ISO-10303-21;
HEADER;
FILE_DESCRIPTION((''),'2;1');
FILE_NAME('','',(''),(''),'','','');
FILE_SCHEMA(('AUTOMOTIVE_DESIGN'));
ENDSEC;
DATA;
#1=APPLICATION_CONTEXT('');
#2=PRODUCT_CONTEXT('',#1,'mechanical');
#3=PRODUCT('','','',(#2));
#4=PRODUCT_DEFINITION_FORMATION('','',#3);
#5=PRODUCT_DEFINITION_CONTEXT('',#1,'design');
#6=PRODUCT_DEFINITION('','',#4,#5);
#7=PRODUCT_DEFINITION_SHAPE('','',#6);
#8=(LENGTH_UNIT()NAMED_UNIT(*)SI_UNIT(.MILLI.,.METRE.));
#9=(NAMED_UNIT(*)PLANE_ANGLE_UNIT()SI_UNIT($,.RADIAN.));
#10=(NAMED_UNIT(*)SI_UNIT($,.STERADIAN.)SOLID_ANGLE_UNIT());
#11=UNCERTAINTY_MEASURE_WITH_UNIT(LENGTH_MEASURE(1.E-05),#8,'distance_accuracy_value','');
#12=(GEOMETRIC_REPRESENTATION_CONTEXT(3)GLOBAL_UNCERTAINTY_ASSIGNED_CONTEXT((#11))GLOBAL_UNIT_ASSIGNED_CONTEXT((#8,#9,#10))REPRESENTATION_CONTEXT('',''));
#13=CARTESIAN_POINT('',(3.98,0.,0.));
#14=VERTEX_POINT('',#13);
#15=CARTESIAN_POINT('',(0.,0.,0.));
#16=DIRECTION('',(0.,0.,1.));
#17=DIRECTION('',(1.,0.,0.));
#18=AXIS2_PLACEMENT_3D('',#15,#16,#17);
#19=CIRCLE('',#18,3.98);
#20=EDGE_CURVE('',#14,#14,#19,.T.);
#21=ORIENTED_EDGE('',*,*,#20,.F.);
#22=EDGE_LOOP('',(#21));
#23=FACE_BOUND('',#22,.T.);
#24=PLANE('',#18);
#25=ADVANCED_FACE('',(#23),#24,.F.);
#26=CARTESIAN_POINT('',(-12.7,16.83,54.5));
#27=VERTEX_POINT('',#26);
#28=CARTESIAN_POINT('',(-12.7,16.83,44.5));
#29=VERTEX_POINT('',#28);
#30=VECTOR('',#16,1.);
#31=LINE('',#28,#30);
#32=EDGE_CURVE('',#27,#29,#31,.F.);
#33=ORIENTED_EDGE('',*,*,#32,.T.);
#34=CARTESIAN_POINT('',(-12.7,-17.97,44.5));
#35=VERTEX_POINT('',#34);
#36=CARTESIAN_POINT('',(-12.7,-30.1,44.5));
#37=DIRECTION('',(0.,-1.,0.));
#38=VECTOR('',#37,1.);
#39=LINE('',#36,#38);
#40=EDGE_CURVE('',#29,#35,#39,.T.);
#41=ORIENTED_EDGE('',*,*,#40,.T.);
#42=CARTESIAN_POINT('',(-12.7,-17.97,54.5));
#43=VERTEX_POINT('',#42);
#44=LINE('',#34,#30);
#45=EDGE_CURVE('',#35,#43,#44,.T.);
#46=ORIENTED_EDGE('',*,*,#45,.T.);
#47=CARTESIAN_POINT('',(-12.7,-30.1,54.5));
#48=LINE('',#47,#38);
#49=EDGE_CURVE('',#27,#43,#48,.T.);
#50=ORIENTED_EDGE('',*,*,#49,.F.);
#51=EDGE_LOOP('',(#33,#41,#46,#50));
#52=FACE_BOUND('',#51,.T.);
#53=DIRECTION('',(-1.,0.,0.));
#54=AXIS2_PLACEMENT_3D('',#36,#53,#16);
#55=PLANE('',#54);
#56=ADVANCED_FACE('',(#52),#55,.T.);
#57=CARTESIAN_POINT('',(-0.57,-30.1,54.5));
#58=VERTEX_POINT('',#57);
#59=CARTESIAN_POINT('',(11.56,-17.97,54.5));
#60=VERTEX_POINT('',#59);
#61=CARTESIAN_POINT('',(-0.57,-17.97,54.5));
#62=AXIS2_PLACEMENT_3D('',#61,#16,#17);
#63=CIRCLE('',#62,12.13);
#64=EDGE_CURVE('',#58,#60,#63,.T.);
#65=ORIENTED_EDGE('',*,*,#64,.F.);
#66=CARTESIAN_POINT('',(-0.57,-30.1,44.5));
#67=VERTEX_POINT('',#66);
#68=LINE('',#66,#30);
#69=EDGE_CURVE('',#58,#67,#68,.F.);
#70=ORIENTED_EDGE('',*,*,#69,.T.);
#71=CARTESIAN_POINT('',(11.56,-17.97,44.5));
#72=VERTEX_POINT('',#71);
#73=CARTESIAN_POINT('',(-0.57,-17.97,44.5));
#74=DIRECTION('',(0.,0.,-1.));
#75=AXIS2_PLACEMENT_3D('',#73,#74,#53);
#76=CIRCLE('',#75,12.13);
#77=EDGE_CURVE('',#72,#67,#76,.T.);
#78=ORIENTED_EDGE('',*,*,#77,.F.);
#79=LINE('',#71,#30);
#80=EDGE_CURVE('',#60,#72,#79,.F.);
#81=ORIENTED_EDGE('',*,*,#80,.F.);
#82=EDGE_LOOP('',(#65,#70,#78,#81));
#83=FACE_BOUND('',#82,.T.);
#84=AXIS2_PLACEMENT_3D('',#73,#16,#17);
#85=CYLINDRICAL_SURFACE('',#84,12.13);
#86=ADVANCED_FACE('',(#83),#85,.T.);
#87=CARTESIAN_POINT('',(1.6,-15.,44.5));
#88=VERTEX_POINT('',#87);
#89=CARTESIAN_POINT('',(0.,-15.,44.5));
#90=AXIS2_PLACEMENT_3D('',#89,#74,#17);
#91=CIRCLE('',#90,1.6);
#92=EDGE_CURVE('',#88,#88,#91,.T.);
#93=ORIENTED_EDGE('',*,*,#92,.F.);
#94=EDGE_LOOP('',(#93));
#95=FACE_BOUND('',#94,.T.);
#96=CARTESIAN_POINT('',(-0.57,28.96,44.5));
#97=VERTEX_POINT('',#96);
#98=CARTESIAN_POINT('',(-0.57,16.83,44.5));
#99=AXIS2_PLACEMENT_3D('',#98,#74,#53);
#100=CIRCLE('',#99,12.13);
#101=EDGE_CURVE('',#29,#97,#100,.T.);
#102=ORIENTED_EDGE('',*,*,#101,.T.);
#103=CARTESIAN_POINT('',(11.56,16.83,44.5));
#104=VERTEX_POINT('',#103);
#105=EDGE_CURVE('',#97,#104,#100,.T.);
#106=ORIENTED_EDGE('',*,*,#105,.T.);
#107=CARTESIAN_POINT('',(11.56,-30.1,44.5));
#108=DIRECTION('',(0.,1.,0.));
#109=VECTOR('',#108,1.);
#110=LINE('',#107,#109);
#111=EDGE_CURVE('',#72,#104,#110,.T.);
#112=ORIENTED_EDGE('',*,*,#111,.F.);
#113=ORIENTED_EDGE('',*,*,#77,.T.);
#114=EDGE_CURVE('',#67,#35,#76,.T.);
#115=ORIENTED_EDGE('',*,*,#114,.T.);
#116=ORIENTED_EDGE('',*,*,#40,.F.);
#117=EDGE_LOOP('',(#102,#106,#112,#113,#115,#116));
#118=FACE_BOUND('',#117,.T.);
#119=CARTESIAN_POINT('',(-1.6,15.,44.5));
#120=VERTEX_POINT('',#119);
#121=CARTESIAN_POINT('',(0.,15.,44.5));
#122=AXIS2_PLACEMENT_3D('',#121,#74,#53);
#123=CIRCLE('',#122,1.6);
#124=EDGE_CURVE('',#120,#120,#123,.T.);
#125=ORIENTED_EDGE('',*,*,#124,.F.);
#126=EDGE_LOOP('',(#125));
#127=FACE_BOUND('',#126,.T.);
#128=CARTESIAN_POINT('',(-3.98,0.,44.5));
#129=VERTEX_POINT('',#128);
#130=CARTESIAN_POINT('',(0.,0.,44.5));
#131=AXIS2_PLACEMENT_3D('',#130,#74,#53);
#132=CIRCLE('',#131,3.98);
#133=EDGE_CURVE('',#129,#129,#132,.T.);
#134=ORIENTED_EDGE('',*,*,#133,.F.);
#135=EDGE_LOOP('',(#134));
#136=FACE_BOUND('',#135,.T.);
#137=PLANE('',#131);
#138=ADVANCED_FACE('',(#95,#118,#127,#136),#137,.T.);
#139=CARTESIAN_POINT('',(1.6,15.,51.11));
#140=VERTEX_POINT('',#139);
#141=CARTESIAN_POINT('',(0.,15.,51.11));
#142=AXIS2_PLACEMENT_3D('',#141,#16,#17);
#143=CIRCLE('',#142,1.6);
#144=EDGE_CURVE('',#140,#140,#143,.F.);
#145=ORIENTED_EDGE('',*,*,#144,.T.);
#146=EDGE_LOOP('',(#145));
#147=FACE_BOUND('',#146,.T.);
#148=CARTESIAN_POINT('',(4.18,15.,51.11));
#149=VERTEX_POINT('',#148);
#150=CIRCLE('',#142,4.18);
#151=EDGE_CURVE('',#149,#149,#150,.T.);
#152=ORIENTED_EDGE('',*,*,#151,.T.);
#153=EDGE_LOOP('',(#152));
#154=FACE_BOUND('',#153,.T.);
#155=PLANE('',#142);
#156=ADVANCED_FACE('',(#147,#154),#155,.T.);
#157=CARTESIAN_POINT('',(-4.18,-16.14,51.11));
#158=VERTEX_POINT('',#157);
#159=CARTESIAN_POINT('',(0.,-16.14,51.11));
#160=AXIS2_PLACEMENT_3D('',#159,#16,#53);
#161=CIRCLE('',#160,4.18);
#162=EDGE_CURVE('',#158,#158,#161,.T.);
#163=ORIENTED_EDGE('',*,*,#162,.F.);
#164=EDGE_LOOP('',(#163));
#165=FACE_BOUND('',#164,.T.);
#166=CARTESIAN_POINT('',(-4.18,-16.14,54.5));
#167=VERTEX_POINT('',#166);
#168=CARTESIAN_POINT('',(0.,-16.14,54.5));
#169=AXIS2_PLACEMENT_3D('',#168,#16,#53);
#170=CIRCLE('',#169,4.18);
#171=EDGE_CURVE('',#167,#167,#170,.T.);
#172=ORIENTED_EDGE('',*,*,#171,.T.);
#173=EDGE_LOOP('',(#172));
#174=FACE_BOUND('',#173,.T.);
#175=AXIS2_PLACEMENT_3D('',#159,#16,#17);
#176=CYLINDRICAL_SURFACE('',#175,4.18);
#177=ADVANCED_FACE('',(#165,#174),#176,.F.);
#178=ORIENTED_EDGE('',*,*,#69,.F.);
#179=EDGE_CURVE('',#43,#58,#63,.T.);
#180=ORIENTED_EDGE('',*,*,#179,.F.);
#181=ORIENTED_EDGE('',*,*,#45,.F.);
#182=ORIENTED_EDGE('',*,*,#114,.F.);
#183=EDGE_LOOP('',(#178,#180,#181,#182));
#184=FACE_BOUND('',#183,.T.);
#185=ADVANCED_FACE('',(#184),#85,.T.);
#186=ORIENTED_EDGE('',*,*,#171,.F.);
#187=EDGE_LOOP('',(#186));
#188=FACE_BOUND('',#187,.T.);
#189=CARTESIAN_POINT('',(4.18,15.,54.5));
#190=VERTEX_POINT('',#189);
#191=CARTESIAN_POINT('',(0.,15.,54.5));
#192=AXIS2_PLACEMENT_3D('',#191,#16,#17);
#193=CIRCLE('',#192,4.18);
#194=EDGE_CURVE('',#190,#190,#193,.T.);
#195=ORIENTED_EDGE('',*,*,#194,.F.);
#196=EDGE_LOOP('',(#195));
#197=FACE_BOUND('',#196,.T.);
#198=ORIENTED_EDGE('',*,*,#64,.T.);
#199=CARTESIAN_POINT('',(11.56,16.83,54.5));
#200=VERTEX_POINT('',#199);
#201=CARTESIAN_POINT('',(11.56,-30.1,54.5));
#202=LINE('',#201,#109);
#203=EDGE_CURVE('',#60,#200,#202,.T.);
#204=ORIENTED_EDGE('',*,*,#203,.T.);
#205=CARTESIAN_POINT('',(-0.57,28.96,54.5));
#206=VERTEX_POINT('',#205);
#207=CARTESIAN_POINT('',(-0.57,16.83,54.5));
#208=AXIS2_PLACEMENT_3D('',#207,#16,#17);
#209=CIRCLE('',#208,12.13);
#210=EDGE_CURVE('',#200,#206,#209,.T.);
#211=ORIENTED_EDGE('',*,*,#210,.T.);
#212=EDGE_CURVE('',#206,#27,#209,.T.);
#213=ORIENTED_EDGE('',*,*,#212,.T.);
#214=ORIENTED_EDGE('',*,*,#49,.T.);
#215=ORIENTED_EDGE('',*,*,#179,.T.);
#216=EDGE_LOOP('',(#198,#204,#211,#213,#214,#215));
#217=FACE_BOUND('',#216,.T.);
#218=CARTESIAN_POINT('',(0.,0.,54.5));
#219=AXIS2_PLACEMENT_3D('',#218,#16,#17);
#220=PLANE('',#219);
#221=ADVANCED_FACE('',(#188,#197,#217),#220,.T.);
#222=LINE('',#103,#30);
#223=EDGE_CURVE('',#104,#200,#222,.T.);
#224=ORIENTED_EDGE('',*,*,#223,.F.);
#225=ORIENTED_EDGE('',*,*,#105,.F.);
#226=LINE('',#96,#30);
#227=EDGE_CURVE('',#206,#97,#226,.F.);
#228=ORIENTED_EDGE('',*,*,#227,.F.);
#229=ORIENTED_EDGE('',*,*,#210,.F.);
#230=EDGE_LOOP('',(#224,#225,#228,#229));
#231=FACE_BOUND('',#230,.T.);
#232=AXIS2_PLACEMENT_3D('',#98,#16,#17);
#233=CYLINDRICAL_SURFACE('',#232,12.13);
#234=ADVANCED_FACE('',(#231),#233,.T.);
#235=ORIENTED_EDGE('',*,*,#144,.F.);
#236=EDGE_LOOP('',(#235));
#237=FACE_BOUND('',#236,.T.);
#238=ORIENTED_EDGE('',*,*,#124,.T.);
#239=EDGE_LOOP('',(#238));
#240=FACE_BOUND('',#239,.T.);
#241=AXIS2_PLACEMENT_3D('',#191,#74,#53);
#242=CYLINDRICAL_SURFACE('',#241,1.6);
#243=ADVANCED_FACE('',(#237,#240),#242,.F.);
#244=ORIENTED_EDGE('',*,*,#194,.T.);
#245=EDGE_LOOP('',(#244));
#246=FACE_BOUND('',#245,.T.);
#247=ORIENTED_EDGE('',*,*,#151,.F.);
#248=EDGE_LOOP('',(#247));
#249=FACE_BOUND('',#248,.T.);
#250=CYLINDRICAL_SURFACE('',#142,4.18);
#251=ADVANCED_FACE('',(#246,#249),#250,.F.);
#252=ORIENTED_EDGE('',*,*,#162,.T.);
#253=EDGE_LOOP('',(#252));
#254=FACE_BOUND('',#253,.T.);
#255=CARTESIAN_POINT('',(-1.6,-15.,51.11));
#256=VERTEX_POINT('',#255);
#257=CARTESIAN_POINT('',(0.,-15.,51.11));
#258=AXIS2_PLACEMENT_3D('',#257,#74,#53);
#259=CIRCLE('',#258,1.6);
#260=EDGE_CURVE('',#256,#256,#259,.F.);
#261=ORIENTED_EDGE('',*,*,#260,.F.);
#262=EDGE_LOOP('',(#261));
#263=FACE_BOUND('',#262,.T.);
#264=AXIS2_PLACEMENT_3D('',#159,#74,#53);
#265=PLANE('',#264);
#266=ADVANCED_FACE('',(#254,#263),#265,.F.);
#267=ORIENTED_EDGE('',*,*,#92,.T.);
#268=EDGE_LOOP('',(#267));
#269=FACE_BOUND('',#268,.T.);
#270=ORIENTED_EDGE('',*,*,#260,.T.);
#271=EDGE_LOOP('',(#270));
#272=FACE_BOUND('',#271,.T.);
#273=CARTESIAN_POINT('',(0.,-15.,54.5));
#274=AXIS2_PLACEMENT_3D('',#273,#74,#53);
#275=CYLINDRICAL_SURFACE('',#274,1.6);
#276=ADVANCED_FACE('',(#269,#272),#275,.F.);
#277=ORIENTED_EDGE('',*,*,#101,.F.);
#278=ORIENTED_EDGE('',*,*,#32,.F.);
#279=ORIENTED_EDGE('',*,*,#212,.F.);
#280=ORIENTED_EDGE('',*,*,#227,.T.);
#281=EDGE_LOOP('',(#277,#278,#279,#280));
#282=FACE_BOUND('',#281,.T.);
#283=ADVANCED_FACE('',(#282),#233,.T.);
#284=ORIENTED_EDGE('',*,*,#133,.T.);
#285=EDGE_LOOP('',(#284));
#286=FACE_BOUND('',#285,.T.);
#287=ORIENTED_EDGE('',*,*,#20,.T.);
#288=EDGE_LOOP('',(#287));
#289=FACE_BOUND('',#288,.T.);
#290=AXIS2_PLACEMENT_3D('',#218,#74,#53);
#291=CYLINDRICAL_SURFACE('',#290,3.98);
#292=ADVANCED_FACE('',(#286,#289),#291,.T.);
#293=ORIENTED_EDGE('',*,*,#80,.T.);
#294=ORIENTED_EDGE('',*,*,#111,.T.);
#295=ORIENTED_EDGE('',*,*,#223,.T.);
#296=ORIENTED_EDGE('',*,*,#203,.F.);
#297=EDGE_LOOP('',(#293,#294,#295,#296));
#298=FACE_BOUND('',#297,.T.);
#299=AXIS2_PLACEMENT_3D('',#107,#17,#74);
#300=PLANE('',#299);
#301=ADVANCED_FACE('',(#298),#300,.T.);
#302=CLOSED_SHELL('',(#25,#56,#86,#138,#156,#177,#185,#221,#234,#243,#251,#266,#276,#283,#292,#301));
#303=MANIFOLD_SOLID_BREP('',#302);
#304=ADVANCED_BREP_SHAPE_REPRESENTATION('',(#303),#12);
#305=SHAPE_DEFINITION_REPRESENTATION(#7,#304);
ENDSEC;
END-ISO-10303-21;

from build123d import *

# Parameters (mm, degrees)
SKETCH1_R             = 3.98
BOSS_EXTRUDE1_DEPTH   = 54.5
SKETCH3_W             = 24.26
SKETCH3_H             = 59.06
BOSS_EXTRUDE2_DEPTH   = 10
SKETCH4_R             = 1.6
CUT_EXTRUDE1_DEPTH    = 56.204619372
CROQUIS2_R            = 4.18
CORTAR_EXTRUIR2_DEPTH = 3.39
REDONDEO1_R           = 12.13


with BuildPart() as part:
    # Sketch1 → Boss-Extrude1 (new body)
    with BuildSketch(Plane.XY):
        Circle(SKETCH1_R)
    extrude(amount=BOSS_EXTRUDE1_DEPTH)

    # Sketch3 → Boss-Extrude2 (add)
    with BuildSketch(Plane.XY.offset(54.5)):
        with Locations((-0.57, -0.57)):
            Rectangle(SKETCH3_W, SKETCH3_H)
    extrude(amount=-BOSS_EXTRUDE2_DEPTH)

    # Sketch4 → Cut-Extrude1 (cut, through all)
    with BuildSketch(Plane(origin=(0, 0, 44.5), x_dir=(-1, 0, 0), z_dir=(0, 0, -1))):
        with Locations((0, 15)):
            Circle(SKETCH4_R)
        with Locations(Location((0, -15, 0), (0, 0, 180))):
            Circle(SKETCH4_R)
    extrude(amount=-CUT_EXTRUDE1_DEPTH, mode=Mode.SUBTRACT)

    # Croquis2 → Cortar-Extruir2 (cut)
    with BuildSketch(Plane.XY.offset(54.5)):
        with Locations((0, 15)):
            Circle(CROQUIS2_R)
        with Locations(Location((0, -16.14, 0), (0, 0, 180))):
            Circle(CROQUIS2_R)
    extrude(amount=-CORTAR_EXTRUIR2_DEPTH, mode=Mode.SUBTRACT)

    # Redondeo1
    redondeo1_edges = [part.edges().sort_by_distance(p)[0] for p in [
        (11.56, -30.1, 49.5),
        (-12.7, -30.1, 49.5),
        (-12.7, 28.96, 49.5),
        (11.56, 28.96, 49.5),
    ]]
    fillet(redondeo1_edges, radius=REDONDEO1_R - 0.0001)  # a hair under: the kernel refuses the full size


solid = part.part
